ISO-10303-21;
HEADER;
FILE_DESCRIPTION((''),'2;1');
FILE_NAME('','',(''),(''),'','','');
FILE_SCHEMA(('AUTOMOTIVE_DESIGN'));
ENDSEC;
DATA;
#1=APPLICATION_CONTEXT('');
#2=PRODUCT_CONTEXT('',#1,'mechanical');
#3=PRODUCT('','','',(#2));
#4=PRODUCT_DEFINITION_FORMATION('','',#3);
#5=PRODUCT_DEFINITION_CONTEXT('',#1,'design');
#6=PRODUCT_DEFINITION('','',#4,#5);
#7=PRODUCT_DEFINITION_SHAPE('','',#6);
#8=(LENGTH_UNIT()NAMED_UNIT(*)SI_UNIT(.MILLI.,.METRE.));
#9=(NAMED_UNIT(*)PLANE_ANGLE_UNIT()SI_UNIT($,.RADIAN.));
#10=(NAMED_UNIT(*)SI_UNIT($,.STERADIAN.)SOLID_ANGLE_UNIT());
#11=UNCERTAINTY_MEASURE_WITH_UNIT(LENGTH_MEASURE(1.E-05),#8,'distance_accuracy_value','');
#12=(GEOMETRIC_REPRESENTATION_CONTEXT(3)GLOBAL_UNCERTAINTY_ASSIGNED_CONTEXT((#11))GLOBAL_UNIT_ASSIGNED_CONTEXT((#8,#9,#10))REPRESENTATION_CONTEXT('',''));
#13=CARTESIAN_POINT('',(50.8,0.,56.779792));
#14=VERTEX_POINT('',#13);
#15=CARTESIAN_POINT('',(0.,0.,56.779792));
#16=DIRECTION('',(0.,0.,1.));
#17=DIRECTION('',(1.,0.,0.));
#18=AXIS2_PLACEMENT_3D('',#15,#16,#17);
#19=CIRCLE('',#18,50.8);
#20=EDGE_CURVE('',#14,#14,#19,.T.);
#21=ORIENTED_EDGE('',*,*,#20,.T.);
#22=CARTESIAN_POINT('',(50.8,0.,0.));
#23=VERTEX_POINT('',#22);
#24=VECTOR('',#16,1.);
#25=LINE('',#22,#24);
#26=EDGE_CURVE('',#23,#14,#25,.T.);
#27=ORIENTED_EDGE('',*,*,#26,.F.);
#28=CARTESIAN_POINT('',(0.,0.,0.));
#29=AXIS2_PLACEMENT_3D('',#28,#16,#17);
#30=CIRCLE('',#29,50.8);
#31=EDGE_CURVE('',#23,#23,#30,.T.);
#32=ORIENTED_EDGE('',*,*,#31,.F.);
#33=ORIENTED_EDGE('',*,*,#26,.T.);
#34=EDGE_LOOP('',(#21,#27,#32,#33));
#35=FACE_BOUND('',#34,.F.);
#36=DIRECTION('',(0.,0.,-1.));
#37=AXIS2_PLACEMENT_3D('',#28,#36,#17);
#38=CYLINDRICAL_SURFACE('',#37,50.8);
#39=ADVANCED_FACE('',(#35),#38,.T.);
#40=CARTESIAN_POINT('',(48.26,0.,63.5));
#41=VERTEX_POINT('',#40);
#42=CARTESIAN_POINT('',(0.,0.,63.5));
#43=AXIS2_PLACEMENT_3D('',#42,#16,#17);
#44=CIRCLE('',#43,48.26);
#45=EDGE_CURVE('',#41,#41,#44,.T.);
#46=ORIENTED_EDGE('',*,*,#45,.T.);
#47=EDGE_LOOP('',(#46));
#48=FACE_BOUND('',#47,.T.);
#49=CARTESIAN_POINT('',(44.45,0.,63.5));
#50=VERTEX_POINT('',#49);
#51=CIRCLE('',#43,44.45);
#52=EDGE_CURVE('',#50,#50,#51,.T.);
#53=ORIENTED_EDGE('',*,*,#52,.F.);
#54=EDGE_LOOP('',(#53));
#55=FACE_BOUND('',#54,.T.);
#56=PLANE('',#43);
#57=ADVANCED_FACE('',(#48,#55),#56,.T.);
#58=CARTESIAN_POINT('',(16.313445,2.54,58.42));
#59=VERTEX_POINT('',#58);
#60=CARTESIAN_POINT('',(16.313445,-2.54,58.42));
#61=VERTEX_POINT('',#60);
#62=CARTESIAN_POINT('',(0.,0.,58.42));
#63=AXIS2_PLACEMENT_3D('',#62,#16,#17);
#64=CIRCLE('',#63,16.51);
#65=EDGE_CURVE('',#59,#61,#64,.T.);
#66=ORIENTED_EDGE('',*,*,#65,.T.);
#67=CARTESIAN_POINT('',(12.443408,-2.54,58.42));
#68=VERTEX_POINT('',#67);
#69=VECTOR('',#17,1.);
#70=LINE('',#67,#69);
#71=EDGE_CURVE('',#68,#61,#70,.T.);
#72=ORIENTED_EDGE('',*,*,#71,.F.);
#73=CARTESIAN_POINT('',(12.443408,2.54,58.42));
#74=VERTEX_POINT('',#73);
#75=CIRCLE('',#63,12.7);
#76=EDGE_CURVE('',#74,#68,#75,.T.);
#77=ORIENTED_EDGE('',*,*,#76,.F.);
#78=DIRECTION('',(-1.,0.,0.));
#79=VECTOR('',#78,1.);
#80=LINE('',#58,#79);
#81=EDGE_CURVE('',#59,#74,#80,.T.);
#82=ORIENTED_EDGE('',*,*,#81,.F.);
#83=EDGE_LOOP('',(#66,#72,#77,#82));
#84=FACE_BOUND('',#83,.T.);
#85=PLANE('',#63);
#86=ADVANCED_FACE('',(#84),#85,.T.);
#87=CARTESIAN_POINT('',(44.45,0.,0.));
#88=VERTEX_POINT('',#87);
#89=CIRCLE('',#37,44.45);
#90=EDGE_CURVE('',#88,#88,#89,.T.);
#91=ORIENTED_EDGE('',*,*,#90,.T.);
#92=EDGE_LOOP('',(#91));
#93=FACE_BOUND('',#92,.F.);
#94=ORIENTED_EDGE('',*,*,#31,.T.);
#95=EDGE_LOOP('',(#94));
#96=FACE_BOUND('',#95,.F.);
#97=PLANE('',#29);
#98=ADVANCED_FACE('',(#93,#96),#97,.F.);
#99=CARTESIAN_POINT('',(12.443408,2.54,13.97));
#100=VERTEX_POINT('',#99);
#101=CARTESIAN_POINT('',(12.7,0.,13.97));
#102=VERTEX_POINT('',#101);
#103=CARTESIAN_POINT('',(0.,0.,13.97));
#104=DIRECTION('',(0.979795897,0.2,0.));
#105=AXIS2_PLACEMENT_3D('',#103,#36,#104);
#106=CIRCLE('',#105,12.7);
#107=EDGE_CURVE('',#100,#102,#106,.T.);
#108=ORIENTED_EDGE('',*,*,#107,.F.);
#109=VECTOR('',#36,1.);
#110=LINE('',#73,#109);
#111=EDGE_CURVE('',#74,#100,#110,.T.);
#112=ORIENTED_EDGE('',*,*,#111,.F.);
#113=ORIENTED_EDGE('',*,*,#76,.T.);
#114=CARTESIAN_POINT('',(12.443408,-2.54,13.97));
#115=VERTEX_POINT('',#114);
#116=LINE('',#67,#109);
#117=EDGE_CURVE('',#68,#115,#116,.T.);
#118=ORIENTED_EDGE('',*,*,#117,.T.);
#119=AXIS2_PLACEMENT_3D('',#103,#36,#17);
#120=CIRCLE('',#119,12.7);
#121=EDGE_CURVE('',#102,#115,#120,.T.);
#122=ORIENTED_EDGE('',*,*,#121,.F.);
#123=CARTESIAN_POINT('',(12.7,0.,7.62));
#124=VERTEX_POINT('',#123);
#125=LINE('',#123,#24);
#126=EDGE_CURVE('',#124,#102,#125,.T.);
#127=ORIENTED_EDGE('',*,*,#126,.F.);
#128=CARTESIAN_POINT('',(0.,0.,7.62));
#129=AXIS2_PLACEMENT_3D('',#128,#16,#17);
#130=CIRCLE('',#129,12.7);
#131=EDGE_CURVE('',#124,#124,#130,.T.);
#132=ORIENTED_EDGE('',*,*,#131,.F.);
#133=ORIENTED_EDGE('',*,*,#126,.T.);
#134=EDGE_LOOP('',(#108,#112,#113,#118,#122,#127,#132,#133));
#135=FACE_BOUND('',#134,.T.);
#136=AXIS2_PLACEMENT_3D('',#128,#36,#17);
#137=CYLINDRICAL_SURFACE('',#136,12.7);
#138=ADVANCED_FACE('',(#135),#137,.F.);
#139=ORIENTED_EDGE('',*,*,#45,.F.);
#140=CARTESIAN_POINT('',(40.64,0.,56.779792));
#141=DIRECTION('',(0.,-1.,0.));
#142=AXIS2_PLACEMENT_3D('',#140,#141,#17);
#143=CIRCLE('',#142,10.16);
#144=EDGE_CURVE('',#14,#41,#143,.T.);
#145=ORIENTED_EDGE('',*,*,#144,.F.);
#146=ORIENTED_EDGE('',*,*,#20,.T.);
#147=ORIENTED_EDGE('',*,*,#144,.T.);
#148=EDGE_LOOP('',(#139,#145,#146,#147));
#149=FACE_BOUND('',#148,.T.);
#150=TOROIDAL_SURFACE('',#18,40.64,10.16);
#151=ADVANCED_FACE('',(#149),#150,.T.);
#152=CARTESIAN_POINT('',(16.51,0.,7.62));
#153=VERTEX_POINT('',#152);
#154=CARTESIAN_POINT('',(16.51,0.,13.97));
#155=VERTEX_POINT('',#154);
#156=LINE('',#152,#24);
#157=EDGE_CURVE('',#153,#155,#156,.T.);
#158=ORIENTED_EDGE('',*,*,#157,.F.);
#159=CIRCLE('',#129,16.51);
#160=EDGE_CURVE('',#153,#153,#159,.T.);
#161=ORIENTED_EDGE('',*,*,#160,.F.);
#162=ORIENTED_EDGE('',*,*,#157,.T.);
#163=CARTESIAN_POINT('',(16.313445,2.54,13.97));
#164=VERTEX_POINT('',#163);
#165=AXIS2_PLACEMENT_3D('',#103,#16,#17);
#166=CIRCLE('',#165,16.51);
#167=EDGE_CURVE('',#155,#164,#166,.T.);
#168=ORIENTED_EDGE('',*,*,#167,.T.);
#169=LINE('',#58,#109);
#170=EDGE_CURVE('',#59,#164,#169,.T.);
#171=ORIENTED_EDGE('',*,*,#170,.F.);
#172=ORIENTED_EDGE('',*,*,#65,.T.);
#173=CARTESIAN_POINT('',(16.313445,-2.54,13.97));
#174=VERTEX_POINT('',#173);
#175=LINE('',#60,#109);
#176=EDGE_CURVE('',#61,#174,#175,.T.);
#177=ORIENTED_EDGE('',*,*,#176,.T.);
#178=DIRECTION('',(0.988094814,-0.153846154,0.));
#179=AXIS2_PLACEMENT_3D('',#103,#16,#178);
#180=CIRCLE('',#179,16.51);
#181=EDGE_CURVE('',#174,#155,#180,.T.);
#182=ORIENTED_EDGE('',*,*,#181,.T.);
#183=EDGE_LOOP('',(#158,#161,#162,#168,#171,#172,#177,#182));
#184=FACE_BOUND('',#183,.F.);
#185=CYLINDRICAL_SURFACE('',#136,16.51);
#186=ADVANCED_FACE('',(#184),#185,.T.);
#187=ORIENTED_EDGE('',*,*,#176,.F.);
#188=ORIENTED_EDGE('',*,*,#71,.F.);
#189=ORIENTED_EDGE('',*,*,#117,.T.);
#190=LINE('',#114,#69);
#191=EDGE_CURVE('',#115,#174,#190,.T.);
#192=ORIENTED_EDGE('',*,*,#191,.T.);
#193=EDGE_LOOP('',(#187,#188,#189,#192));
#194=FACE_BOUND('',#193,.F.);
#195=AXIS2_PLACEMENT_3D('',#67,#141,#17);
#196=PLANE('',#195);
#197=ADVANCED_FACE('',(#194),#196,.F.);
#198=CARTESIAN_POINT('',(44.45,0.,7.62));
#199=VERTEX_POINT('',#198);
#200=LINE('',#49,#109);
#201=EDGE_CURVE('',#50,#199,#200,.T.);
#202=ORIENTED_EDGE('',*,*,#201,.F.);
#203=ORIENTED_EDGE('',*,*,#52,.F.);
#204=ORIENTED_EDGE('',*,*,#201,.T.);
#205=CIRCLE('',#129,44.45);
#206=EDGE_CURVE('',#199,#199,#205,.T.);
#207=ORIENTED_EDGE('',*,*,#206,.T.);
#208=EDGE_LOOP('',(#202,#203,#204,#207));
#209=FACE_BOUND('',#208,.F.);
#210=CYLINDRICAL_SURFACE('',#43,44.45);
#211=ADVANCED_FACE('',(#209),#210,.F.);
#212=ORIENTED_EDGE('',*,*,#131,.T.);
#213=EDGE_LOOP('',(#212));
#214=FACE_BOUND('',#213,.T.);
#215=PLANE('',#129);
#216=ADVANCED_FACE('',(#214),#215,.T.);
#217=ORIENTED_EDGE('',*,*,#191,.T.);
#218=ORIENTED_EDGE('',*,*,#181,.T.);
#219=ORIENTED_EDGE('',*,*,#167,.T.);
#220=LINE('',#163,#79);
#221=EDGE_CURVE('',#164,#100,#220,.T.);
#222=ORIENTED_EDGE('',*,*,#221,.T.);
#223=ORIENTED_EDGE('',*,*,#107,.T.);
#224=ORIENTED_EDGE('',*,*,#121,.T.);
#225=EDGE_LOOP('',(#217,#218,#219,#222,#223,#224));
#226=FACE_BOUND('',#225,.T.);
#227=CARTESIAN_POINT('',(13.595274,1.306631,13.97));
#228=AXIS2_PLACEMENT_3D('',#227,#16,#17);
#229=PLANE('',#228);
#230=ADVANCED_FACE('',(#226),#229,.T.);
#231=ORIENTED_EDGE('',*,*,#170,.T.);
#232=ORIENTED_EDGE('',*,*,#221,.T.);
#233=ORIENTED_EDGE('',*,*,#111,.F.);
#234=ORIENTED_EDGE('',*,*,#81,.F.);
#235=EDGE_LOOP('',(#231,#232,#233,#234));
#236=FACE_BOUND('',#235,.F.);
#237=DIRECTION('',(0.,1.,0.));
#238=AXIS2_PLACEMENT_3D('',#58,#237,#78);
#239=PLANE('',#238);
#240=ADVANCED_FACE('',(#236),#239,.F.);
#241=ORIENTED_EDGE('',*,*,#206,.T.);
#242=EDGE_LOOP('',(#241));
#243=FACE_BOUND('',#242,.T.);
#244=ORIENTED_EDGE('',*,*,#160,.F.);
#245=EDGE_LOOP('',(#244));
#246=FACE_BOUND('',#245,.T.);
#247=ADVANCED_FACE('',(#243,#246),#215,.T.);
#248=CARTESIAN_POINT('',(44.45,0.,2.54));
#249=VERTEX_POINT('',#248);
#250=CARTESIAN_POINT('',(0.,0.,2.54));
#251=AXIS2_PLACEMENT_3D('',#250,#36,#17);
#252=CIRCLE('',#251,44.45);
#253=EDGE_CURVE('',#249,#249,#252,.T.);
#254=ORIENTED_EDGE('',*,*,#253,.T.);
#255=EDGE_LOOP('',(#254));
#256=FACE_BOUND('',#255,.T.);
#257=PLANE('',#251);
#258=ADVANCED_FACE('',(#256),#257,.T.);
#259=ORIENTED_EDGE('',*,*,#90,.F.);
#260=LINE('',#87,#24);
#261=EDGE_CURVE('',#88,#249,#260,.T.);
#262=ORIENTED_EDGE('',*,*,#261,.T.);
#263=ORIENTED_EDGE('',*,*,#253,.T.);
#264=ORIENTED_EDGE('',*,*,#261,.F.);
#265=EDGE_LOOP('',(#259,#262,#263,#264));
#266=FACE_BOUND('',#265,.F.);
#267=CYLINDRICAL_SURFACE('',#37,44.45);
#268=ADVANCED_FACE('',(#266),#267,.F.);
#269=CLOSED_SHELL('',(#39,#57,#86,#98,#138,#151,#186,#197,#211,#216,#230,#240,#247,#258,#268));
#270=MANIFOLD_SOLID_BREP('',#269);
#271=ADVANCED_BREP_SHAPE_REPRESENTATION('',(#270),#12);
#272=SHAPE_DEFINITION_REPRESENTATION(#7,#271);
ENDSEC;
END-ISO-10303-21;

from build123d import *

# Parameters (mm, degrees)
F0_R      = 50.8
F1_DEPTH  = 63.5
F2_R      = 44.45
F3_DEPTH  = 55.88
F4_R      = 44.45
F5_DEPTH  = 2.54
F6_SIZE   = 2.54
F8_R      = 16.51
F8_R_2    = 12.7
F9_DEPTH  = 50.8
F11_DEPTH = 44.45


# Not quite as in the source:
# - a fillet or chamfer that OpenCascade refuses, or shapes differently, is made with other operations: its cross-section is extruded or revolved along the edge and cut away or added


with BuildPart() as f1:
    # F0 (on Top) → F1 (new body)
    with BuildSketch(Plane.XY):
        Circle(F0_R)
    extrude(amount=F1_DEPTH)

    # F2 (on face) → F3 (cut)
    with BuildSketch(Plane.XY.offset(63.5)):
        Circle(F2_R)
    extrude(amount=-F3_DEPTH, mode=Mode.SUBTRACT)

    # F4 (on face) → F5 (cut)
    with BuildSketch(Plane(origin=(0, 0, 0), x_dir=(1, 0, 0), z_dir=(0, 0, -1))):
        Circle(F4_R)
    extrude(amount=-F5_DEPTH, mode=Mode.SUBTRACT)

    # F6
    f6_edges = [f1.edges().sort_by_distance(p)[0] for p in [
        (-50.8, 0, 63.5),
    ]]
    chamfer(f6_edges, length=F6_SIZE)

    # F7: fillet of radius 10.16 on 1 edges, made by hand

    # F7_s1 → F7_t2 (revolve, cut)
    with BuildSketch(Plane.XZ):
        with BuildLine():
            ThreePointArc((50.8, 56.7797916699), (50.1438097624, 60.3718941183), (48.26, 63.5))
            Line((48.26, 63.5), (50.8, 60.96))
            Line((50.8, 60.96), (50.8, 56.7797916699))
        make_face()
    revolve(axis=Axis((0, 0, 60.96), (0, 0, 1)), mode=Mode.SUBTRACT)

    # F8 (on face) → F9 (join)
    with BuildSketch(Plane.XY.offset(7.62)):
        Circle(F8_R)
        Circle(F8_R_2, mode=Mode.SUBTRACT)
    extrude(amount=F9_DEPTH)

    # F10 (on face) → F11 (cut)
    with BuildSketch(Plane.XY.offset(58.42)):
        with BuildLine():
            ThreePointArc((12.4434078933, 2.54), (12.6356891432, 1.2764638175), (12.7, 0))
            Line((12.7, 0), (14.605, 0))
            Line((14.605, 0), (14.605, 2.54))
            Line((14.605, 2.54), (12.4434078933, 2.54))
        make_face()
        with BuildLine():
            Line((14.605, 2.54), (14.605, 0))
            Line((14.605, 0), (16.51, 0))
            ThreePointArc((16.51, 0), (16.4607879997, 1.2737968559), (16.3134453749, 2.54))
            Line((16.3134453749, 2.54), (14.605, 2.54))
        make_face()
        with BuildLine():
            Line((16.51, 0), (14.605, 0))
            Line((14.605, 0), (14.605, -2.54))
            Line((14.605, -2.54), (16.3134453749, -2.54))
            ThreePointArc((16.3134453749, -2.54), (16.4607879997, -1.2737968559), (16.51, 0))
        make_face()
        with BuildLine():
            Line((14.605, 0), (12.7, 0))
            ThreePointArc((12.7, 0), (12.6356891432, -1.2764638175), (12.4434078933, -2.54))
            Line((12.4434078933, -2.54), (14.605, -2.54))
            Line((14.605, -2.54), (14.605, 0))
        make_face()
    extrude(amount=-F11_DEPTH, mode=Mode.SUBTRACT)


solid = f1.part
